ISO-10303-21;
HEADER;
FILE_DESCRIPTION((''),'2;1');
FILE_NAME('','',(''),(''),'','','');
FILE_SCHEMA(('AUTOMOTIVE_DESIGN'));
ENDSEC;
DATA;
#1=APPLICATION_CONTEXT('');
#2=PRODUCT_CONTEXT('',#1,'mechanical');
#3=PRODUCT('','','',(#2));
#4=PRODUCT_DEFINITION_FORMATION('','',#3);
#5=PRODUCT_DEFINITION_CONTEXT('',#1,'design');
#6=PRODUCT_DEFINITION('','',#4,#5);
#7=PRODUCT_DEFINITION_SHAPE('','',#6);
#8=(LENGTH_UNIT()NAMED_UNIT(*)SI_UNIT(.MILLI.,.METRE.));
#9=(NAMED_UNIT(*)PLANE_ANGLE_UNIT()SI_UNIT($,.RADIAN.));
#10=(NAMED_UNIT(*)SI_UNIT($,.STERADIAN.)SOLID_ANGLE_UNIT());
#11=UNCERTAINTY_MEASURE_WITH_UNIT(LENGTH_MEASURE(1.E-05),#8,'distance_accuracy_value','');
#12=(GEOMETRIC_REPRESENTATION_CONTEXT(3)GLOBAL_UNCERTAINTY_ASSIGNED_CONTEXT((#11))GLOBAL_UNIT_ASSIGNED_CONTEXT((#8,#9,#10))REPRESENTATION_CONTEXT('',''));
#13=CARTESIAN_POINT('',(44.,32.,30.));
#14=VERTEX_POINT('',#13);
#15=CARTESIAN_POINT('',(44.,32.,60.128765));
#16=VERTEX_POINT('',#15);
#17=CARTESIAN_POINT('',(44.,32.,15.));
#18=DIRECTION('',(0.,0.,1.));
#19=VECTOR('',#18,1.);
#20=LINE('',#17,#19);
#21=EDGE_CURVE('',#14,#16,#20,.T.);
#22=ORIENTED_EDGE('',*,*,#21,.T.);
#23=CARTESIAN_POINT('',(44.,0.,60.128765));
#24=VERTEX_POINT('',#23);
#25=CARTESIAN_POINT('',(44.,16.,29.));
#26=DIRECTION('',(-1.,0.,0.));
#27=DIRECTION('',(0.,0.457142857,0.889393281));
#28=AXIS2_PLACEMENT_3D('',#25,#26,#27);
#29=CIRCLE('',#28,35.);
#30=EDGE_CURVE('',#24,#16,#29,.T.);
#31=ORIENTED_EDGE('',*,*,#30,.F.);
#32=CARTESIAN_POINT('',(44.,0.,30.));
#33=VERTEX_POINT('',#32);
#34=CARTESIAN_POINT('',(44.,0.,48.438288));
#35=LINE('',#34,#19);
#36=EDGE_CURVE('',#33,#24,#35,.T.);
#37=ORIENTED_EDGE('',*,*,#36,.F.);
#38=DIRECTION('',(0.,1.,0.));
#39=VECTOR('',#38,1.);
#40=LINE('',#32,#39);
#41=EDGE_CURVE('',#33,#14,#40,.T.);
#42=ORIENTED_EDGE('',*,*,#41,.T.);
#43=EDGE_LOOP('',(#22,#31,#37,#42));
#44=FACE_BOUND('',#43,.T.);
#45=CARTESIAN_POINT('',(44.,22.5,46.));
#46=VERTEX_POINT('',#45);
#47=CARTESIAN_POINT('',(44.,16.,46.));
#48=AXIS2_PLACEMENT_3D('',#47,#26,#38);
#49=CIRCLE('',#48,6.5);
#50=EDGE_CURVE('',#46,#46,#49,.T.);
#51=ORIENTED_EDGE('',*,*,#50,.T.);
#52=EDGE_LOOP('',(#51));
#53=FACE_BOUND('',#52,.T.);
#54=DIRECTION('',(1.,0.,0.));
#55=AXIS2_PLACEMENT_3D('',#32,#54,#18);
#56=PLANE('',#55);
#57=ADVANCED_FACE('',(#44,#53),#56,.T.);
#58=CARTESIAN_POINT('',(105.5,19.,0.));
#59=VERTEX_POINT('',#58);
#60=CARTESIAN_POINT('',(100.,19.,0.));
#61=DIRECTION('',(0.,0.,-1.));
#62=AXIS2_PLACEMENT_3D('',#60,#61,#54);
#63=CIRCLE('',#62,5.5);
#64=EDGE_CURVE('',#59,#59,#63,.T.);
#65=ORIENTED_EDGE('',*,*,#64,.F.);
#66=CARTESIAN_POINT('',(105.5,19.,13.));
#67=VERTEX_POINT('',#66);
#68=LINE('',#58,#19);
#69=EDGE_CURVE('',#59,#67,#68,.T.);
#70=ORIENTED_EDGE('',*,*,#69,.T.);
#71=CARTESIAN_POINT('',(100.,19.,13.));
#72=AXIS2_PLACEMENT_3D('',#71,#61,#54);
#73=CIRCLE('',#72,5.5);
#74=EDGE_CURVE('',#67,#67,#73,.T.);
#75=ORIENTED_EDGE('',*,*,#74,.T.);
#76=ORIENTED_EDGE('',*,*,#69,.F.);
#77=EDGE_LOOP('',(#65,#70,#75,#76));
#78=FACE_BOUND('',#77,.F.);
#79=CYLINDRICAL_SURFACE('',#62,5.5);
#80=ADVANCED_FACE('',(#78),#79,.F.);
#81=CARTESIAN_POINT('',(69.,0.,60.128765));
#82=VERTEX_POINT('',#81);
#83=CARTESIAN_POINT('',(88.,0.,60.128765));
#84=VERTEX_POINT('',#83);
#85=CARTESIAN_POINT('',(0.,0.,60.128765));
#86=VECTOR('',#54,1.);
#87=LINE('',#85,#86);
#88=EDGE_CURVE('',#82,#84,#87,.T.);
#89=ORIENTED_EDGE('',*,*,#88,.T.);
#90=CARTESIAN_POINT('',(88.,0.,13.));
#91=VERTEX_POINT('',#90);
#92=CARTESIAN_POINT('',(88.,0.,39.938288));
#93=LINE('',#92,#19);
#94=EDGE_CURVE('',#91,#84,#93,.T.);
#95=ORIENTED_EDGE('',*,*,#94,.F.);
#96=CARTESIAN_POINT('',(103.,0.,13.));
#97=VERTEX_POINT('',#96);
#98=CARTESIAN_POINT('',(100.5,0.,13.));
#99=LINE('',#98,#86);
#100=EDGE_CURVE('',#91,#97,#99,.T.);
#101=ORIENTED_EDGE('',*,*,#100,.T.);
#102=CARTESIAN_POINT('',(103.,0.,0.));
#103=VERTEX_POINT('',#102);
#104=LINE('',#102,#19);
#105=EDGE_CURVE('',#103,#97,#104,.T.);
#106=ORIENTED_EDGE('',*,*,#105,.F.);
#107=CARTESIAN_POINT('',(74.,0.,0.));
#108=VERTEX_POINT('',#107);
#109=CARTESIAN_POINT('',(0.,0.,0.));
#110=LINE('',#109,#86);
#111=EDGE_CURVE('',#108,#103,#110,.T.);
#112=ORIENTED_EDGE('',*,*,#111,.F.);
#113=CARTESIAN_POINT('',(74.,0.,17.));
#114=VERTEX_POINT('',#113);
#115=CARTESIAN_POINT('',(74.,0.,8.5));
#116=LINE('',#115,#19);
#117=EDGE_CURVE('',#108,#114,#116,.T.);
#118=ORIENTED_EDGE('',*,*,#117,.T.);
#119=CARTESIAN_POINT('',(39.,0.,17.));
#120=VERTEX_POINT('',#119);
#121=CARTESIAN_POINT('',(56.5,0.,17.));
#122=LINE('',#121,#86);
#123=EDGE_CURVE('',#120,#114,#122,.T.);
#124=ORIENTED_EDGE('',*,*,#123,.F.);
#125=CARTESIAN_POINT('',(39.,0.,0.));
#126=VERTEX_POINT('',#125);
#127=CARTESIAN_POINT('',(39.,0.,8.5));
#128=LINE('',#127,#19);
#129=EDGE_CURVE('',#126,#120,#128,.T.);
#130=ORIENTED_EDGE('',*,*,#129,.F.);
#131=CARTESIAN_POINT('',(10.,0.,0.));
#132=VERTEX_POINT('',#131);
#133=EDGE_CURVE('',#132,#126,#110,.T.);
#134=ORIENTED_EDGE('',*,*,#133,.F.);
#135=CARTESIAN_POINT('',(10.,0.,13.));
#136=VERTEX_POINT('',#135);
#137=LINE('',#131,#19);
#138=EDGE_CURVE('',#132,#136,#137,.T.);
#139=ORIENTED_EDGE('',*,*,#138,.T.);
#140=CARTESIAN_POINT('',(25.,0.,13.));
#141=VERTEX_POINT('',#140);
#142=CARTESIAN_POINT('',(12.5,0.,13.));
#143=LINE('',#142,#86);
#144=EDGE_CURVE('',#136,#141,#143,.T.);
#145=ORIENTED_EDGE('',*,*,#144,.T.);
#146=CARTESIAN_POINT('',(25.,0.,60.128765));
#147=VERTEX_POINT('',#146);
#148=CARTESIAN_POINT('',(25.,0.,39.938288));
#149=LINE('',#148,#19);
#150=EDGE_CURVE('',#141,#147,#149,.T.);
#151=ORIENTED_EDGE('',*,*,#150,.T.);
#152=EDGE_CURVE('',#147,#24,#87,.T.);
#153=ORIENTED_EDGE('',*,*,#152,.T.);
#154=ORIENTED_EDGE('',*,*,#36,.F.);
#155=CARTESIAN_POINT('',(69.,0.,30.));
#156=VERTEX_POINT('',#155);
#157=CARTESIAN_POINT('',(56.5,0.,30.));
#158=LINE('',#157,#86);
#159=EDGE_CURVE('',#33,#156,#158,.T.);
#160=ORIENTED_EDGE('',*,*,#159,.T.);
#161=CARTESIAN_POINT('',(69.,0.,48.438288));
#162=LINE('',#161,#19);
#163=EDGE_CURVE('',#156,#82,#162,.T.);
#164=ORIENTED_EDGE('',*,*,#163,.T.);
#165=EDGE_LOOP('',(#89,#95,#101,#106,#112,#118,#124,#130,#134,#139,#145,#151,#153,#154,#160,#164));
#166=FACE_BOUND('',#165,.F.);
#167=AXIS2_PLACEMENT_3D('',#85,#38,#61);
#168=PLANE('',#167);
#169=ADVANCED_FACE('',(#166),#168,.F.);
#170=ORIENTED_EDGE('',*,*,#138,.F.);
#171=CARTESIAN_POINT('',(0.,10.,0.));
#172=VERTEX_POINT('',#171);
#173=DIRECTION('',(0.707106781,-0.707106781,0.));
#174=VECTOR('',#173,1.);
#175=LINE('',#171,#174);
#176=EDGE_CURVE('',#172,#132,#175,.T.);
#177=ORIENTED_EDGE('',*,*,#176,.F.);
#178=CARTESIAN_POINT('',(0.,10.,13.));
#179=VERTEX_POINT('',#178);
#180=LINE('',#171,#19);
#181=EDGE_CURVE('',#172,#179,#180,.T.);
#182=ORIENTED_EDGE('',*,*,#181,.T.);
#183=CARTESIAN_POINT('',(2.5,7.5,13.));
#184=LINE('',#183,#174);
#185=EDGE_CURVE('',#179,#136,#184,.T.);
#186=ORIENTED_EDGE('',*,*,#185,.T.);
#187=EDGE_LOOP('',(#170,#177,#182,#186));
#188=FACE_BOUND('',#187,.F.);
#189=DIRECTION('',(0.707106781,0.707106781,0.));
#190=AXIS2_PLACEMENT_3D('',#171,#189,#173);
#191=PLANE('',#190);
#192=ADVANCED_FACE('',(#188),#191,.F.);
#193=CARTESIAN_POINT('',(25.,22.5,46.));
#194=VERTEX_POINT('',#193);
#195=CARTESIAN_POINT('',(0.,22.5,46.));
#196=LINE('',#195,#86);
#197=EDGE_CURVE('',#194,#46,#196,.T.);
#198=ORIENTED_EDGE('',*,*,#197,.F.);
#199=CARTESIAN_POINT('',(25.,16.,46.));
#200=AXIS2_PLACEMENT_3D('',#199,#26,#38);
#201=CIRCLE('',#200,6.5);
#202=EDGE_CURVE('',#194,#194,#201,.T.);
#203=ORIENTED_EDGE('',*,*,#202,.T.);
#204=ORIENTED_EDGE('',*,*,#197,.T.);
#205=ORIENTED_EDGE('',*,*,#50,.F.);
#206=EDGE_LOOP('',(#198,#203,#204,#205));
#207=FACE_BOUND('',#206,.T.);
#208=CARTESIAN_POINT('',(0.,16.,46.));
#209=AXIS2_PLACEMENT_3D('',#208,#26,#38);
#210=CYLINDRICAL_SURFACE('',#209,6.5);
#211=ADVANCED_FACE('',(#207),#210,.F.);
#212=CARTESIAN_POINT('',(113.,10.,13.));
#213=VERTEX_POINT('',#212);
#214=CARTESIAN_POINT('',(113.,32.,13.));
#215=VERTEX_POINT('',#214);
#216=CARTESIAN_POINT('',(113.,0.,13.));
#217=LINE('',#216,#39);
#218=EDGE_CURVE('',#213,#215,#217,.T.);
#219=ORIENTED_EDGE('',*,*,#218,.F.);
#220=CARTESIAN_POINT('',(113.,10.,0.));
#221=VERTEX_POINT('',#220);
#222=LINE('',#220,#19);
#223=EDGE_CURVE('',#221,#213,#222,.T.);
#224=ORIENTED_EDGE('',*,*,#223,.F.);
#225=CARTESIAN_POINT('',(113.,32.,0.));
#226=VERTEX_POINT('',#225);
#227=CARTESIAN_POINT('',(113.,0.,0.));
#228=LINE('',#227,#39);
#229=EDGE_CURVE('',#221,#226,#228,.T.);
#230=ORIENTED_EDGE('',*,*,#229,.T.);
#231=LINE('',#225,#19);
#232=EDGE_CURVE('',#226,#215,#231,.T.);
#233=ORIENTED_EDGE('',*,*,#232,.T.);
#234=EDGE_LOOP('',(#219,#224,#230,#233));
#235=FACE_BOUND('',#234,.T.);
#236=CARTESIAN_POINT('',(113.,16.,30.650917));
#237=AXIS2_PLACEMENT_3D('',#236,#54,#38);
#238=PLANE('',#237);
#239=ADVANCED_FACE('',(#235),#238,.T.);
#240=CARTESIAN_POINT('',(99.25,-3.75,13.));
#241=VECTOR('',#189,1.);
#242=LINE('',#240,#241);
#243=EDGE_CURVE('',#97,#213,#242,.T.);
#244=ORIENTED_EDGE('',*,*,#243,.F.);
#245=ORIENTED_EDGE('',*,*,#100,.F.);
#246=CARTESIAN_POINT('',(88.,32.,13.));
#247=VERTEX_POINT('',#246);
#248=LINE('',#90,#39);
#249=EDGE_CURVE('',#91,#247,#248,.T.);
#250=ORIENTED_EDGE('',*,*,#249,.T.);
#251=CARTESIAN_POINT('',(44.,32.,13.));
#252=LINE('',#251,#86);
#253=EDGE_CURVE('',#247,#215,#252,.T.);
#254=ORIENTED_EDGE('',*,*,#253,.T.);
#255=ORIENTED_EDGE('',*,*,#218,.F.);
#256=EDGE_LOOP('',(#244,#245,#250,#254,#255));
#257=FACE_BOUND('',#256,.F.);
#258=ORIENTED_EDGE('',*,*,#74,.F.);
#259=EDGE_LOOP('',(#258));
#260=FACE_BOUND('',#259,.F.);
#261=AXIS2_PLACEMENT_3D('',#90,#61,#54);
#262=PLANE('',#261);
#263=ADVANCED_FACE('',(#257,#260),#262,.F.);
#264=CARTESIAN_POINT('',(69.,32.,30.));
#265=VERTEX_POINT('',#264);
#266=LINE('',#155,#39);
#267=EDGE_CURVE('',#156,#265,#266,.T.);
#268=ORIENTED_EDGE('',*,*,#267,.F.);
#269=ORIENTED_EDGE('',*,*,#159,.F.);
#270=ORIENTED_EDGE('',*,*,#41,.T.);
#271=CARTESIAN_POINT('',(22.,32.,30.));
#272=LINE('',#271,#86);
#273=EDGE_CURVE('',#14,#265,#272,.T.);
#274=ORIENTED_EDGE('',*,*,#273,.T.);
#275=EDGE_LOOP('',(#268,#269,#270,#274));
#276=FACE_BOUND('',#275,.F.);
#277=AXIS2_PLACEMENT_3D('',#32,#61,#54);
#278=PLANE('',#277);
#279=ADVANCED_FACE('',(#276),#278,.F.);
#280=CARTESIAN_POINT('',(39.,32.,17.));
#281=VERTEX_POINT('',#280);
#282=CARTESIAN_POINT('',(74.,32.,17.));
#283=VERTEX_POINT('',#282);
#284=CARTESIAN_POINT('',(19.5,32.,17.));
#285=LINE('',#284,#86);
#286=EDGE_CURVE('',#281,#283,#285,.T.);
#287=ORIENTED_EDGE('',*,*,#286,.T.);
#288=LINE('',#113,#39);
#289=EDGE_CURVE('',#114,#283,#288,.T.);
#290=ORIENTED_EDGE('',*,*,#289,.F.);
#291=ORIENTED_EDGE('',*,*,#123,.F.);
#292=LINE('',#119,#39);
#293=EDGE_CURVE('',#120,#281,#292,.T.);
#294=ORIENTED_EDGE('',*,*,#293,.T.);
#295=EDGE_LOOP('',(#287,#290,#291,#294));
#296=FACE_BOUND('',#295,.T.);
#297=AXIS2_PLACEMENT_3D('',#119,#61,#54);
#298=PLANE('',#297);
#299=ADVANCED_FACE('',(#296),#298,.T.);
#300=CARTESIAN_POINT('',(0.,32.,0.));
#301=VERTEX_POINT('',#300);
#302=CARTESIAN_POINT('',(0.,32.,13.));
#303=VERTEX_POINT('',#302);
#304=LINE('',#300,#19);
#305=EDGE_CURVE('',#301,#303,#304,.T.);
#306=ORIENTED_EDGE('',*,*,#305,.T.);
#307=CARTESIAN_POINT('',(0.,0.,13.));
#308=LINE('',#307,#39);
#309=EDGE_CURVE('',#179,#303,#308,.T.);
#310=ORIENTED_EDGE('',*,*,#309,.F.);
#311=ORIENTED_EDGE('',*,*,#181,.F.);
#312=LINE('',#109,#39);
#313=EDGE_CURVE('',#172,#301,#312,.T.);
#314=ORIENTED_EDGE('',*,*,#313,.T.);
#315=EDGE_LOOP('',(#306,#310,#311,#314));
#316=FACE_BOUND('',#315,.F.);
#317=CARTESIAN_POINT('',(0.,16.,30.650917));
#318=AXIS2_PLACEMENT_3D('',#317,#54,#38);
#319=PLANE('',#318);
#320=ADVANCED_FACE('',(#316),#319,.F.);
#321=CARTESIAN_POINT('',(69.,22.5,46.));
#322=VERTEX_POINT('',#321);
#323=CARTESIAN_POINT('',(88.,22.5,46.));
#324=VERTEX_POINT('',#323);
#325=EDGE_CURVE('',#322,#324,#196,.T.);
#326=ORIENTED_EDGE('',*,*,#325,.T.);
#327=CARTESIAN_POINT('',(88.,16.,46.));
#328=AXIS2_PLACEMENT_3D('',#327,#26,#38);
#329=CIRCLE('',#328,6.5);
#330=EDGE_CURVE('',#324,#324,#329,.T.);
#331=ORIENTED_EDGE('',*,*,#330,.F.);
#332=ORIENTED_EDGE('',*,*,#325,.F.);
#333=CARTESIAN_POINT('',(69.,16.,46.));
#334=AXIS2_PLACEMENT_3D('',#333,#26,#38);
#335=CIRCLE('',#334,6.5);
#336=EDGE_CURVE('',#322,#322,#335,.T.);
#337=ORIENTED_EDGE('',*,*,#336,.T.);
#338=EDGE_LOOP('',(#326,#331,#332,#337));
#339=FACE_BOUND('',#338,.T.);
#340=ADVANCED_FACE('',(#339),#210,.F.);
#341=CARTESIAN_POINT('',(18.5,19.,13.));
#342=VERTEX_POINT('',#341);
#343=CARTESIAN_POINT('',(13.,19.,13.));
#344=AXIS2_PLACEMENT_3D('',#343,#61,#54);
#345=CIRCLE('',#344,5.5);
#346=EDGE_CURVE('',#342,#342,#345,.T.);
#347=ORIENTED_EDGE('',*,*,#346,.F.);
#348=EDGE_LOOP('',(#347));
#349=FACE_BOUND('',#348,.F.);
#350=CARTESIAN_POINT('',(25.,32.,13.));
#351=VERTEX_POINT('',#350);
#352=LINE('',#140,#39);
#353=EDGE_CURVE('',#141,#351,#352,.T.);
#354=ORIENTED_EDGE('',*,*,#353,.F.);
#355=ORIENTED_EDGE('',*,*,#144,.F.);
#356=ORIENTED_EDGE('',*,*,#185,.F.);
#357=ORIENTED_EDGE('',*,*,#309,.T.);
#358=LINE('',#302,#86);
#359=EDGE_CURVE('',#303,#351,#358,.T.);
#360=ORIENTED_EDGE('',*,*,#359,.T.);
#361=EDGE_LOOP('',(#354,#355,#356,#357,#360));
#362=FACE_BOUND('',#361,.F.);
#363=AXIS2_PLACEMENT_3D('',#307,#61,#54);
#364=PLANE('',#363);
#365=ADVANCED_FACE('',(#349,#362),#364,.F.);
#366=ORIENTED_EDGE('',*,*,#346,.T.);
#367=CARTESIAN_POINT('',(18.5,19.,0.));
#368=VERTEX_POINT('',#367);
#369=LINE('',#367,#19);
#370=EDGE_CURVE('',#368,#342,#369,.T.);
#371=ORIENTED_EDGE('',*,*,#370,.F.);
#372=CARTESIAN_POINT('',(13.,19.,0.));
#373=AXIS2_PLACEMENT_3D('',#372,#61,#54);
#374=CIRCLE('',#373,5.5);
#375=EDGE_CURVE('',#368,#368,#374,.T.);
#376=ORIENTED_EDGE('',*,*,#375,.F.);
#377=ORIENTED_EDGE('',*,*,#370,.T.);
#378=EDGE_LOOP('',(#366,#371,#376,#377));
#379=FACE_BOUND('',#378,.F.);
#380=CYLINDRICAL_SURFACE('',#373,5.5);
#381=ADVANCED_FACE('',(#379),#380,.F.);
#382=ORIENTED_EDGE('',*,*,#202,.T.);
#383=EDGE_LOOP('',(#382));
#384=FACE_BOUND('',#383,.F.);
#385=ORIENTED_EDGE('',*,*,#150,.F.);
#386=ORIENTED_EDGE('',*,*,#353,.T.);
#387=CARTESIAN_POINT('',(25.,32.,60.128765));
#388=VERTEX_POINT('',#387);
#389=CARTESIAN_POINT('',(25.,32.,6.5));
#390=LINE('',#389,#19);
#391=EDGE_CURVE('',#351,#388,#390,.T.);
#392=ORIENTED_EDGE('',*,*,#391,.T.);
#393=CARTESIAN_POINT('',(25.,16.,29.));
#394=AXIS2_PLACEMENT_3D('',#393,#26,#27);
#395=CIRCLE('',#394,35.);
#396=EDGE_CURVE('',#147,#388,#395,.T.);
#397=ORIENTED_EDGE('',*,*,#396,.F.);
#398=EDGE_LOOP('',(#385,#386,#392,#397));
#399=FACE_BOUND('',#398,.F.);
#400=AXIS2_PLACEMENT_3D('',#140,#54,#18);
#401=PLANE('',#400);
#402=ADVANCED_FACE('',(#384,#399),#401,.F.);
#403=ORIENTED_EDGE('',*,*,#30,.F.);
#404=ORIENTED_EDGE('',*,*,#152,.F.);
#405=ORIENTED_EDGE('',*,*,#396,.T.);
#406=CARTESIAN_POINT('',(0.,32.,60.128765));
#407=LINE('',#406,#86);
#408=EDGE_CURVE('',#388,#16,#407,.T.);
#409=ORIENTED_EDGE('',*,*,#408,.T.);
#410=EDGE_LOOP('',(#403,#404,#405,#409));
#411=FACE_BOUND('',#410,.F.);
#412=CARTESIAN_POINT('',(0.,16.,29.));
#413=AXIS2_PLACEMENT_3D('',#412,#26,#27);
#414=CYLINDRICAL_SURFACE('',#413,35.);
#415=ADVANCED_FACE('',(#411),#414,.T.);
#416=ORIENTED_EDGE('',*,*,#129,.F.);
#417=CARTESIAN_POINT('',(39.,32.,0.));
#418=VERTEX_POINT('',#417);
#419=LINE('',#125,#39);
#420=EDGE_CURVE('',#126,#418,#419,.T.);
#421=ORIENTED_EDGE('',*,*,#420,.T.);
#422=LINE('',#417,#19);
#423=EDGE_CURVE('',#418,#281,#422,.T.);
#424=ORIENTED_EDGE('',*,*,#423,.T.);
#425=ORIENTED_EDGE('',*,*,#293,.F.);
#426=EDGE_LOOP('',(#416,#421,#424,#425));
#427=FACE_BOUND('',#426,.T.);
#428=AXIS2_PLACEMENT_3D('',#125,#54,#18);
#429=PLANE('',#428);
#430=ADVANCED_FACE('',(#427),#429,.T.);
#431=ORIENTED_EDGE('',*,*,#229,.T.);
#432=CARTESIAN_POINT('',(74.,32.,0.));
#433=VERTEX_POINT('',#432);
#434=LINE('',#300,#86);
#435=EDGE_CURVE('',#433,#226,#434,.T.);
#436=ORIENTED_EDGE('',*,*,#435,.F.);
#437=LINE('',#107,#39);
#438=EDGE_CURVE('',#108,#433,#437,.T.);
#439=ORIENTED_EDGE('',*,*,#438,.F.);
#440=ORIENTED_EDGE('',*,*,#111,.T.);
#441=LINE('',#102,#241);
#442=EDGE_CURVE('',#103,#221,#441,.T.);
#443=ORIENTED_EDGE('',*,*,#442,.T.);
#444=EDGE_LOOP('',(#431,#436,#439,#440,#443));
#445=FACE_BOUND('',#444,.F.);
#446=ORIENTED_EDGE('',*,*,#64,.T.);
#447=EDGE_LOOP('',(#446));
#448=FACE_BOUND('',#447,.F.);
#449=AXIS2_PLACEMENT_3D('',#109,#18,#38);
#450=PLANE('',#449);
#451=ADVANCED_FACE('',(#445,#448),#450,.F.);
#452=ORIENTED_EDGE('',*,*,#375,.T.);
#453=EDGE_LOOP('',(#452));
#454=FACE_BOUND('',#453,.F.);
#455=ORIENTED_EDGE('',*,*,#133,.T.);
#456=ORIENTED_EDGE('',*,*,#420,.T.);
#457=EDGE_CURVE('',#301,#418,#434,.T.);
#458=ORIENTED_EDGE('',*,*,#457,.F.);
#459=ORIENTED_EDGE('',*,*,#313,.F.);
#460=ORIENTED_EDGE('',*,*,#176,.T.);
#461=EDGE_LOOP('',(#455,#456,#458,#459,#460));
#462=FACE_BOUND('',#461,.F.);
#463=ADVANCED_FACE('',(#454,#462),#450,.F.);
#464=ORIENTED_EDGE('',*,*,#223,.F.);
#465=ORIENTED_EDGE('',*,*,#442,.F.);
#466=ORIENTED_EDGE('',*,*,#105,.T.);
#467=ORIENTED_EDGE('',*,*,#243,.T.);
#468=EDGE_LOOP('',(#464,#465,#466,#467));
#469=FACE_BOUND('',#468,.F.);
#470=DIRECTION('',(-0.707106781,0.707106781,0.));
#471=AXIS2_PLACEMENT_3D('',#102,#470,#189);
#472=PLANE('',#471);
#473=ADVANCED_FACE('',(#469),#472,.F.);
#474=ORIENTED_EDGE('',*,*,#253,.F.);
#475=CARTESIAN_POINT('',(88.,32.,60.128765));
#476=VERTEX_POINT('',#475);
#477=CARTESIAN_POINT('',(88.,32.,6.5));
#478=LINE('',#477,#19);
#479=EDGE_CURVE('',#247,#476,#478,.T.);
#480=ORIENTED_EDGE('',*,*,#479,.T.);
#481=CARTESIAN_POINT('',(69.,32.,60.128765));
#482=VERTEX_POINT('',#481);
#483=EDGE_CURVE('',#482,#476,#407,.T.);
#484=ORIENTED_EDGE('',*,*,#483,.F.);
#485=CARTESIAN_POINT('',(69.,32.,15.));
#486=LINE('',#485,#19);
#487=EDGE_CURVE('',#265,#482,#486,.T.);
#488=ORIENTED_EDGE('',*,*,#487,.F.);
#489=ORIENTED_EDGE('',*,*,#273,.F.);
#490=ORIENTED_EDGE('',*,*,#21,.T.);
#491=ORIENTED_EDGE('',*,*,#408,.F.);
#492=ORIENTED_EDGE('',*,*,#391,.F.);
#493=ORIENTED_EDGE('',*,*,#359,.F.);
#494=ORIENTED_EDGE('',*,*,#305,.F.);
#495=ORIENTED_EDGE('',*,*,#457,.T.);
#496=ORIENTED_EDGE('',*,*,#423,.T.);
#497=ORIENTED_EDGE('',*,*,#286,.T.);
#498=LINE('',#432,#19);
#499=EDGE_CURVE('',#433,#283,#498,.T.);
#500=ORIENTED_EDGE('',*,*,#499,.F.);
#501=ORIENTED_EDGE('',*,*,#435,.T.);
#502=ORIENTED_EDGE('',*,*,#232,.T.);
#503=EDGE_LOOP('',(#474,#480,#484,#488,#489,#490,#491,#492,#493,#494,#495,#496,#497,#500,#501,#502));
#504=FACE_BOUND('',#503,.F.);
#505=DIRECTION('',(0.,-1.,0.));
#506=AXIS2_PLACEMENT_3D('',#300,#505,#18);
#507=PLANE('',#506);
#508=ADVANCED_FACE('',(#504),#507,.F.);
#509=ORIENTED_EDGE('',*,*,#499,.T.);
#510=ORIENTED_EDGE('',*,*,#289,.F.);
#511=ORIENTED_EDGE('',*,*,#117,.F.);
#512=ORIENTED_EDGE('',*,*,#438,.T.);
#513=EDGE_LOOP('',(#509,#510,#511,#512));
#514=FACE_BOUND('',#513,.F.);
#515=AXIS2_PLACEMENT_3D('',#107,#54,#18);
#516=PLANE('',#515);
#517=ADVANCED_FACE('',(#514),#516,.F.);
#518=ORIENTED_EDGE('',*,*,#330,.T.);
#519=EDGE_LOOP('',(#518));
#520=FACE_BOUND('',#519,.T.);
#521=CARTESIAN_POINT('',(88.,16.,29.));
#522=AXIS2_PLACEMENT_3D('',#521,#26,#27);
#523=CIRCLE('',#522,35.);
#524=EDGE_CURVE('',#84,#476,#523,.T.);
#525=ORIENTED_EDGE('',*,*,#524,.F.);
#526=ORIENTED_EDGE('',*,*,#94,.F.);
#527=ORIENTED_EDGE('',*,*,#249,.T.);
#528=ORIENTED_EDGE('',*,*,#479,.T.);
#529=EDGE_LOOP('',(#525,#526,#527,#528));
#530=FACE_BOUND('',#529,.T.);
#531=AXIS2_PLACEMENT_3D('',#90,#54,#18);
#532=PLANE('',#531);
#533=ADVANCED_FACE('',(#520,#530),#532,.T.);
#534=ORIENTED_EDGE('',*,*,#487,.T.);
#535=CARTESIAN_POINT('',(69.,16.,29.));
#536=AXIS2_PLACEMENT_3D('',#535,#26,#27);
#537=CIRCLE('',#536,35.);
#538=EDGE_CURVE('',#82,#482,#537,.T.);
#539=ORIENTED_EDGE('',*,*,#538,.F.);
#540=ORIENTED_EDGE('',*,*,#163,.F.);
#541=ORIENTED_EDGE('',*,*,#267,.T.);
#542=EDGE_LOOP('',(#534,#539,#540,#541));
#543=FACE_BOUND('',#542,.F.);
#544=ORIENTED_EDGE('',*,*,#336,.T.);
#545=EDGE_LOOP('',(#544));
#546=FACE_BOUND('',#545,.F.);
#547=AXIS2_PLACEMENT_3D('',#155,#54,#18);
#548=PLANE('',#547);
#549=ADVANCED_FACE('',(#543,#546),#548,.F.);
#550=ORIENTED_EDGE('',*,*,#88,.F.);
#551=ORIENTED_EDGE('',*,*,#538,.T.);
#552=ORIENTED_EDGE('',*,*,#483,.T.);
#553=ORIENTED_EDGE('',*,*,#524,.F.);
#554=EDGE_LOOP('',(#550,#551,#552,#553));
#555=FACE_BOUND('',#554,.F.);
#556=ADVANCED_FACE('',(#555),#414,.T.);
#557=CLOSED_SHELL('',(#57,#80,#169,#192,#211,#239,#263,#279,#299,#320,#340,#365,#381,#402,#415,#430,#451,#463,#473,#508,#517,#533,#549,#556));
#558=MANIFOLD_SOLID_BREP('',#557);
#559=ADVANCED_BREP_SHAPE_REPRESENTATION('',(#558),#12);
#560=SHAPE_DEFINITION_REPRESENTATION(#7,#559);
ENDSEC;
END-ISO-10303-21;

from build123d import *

# Parameters (mm, degrees)
F0_R     = 6.5
F1_DEPTH = 113
F2_W     = 25
F2_H     = 53.8765753508
F2_H_2   = 36.8765753508
F2_W_2   = 35
F2_H_3   = 17
F3_DEPTH = 32.001
F4_R     = 5.5
F5_DEPTH = 64.001


with BuildPart() as f1:
    # F0 (on Right) → F1 (new body)
    with BuildSketch(Plane.YZ):
        with BuildLine():
            Line((0, 60.1287648325), (0, 0))
            Line((0, 0), (32, 0))
            Line((32, 0), (32, 60.1287648325))
            ThreePointArc((32, 60.1287648325), (16, 64), (0, 60.1287648325))
        make_face()
        with Locations((16, 46)):
            Circle(F0_R, mode=Mode.SUBTRACT)
    extrude(amount=F1_DEPTH)

    # F2 (on face) → F3 (cut, through all)
    with BuildSketch(Plane.XZ):
        with Locations((12.5, 39.9382876754)):
            Rectangle(F2_W, F2_H)
        with Locations((100.5, 39.9382876754)):
            Rectangle(F2_W, F2_H)
        with Locations((56.5, 48.4382876754)):
            Rectangle(F2_W, F2_H_2)
        with Locations((56.5, 8.5)):
            Rectangle(F2_W_2, F2_H_3)
    extrude(amount=-F3_DEPTH, mode=Mode.SUBTRACT)

    # F4 (on face) → F5 (cut, through all)
    with BuildSketch(Plane(origin=(0, 0, 0), x_dir=(1, 0, 0), z_dir=(0, 0, -1))):
        Polygon((0, 0), (0, -10), (10, 0), align=None)
        with Locations((100, -19)):
            Circle(F4_R)
        with Locations((13, -19)):
            Circle(F4_R)
        Polygon((113, 0), (103, 0), (113, -10), align=None)
    extrude(amount=-F5_DEPTH, mode=Mode.SUBTRACT)


solid = f1.part
